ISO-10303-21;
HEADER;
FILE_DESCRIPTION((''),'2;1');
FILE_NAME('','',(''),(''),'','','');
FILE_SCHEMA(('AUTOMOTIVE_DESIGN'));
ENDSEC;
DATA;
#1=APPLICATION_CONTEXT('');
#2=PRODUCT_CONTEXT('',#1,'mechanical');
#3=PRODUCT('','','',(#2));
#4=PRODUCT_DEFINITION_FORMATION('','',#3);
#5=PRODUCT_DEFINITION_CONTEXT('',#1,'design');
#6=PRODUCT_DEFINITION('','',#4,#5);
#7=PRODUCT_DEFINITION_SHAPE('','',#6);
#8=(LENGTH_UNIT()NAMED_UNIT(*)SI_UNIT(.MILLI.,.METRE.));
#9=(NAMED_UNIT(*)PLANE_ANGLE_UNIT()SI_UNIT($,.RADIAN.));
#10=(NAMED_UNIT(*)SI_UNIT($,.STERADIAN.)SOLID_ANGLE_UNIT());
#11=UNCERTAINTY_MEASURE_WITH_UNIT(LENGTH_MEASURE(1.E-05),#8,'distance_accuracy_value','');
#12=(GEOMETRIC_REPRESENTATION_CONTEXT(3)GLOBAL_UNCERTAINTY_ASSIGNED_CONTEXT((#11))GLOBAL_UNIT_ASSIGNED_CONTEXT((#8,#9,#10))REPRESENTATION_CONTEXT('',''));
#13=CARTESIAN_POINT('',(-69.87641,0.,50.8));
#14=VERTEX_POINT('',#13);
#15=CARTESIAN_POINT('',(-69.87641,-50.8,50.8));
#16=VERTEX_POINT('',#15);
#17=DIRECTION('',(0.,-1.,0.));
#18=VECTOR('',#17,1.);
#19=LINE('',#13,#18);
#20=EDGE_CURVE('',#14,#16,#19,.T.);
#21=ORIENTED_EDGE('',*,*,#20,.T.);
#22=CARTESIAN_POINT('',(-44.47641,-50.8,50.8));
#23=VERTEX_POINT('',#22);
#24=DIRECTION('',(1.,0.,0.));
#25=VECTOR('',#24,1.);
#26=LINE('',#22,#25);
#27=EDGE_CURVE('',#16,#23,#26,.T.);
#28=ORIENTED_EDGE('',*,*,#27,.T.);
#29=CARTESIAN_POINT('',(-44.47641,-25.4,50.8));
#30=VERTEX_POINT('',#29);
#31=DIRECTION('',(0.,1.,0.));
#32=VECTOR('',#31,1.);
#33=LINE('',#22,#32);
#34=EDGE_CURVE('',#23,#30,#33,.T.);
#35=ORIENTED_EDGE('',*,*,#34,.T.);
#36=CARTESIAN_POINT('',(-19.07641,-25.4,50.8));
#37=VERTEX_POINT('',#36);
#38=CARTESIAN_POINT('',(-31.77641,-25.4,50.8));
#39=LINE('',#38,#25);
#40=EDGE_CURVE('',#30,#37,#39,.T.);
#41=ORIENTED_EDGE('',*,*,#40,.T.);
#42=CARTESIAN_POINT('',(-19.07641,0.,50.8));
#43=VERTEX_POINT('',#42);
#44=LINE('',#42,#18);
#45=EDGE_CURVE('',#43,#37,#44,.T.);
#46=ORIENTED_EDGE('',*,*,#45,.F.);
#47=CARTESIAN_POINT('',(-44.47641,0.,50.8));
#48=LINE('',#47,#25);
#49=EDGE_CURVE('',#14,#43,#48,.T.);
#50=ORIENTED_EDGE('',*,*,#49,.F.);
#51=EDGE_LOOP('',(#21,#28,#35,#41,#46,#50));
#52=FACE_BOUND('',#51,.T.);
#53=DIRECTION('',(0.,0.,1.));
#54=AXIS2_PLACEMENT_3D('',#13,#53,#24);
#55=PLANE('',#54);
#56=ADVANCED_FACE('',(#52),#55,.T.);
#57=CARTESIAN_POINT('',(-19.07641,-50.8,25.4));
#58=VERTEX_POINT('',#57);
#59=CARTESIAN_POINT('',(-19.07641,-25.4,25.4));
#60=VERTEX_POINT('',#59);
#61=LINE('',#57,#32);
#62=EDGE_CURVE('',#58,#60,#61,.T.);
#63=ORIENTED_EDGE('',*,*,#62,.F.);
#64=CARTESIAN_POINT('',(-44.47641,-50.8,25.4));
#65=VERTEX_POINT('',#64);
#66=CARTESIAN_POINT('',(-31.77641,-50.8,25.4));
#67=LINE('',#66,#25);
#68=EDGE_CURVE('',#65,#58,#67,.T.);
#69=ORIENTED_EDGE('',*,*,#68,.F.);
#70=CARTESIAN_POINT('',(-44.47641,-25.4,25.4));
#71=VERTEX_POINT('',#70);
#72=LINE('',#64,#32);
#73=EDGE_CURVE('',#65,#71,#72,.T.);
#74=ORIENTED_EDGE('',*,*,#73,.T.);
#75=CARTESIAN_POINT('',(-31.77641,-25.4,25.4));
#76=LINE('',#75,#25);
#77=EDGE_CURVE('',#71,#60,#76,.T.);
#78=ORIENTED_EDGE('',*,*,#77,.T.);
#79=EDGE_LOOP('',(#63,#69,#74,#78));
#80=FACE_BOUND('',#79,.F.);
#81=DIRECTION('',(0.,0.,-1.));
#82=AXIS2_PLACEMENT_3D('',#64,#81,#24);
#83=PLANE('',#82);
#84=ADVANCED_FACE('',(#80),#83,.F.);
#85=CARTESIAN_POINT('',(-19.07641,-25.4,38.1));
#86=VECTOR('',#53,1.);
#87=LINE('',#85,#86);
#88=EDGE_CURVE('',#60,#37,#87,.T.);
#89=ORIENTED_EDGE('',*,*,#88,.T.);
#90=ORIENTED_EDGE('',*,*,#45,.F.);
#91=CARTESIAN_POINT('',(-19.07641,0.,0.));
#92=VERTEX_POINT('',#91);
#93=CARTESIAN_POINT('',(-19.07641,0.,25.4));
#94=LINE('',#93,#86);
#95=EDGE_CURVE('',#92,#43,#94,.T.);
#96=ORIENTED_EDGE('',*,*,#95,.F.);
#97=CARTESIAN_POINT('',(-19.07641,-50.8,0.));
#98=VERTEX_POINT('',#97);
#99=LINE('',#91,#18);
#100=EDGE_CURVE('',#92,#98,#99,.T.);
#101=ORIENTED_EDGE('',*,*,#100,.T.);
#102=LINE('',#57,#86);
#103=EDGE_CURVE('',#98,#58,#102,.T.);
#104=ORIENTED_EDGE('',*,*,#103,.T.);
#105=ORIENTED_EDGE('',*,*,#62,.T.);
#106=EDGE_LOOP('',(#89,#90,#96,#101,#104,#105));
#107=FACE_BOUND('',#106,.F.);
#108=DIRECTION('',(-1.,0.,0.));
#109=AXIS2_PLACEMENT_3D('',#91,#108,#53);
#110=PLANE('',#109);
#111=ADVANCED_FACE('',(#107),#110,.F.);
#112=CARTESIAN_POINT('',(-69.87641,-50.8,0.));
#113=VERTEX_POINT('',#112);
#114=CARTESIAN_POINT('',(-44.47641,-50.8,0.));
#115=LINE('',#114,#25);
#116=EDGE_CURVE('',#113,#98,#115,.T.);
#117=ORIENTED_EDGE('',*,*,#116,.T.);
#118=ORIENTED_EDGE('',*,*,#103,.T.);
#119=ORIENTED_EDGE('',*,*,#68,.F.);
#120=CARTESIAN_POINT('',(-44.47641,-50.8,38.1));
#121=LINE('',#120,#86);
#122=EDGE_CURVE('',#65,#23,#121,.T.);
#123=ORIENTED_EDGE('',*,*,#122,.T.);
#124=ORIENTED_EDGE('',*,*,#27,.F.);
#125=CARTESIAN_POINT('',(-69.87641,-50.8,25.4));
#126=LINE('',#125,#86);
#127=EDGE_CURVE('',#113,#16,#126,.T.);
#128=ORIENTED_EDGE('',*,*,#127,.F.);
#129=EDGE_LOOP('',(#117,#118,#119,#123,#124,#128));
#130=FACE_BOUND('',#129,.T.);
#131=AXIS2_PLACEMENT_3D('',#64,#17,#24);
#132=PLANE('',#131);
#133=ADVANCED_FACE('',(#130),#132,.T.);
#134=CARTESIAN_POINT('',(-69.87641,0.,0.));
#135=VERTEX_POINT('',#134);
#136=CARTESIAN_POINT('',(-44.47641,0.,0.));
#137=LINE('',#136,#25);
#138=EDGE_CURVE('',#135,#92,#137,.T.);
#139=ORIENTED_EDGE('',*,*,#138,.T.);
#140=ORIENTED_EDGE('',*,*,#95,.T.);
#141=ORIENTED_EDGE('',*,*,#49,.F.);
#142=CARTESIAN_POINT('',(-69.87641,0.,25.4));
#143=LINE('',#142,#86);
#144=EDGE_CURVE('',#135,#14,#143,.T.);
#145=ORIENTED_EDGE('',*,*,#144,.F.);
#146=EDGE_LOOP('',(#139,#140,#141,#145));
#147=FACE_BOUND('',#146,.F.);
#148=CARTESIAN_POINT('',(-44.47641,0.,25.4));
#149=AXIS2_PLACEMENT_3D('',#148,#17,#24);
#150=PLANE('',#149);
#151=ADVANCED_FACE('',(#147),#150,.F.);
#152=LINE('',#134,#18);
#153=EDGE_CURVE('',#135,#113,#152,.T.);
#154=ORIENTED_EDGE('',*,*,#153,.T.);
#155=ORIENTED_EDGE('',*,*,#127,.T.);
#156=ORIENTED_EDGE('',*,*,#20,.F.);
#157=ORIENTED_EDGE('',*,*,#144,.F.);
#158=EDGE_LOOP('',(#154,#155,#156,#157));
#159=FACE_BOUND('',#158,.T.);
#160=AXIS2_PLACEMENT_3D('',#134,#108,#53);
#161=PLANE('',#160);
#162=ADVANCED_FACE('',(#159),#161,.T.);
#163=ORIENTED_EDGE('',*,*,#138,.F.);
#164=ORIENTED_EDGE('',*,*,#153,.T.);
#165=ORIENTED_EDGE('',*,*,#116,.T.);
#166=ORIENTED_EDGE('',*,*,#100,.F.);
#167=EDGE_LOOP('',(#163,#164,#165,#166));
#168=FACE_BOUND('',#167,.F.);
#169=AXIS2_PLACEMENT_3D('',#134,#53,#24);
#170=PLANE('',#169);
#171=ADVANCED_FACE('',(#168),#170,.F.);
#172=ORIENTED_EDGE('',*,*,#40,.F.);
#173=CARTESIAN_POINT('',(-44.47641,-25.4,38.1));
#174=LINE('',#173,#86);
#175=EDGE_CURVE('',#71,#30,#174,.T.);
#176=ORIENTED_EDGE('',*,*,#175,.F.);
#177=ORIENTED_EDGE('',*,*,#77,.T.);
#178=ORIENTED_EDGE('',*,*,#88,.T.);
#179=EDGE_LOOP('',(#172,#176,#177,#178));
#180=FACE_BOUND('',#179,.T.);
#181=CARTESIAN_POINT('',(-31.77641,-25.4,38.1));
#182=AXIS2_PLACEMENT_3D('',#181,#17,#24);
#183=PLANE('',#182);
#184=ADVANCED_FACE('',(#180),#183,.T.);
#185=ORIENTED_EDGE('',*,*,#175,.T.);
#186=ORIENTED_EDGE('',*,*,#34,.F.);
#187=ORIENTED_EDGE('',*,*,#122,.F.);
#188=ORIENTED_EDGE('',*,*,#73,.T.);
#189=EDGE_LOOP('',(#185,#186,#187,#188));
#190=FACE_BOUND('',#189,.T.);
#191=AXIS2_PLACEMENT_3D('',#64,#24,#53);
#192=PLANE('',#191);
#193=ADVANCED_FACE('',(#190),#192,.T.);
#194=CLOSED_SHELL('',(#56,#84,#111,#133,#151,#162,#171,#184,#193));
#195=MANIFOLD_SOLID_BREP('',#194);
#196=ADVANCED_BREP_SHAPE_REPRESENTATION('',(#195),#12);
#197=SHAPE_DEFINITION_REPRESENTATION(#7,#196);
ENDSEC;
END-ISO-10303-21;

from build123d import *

# Parameters (mm, degrees)
F0_W     = 50.8
F0_H     = 50.8
F1_DEPTH = 50.8
F2_W     = 25.4
F2_H     = 25.4
F3_DEPTH = 25.4


# Not quite as in the source:
# - a feature names something its author has since deleted; it is built from what else it names


with BuildPart() as f1:
    # F0 (on Front) → F1 (new body)
    with BuildSketch(Plane.XZ):
        with Locations((-44.4764100671, 25.4)):
            Rectangle(F0_W, F0_H)
    extrude(amount=F1_DEPTH)

    # F2 (on face) → F3 (cut)
    with BuildSketch(Plane.XZ.offset(50.8)):
        with Locations((-31.7764100671, 38.1)):
            Rectangle(F2_W, F2_H)
    extrude(amount=-F3_DEPTH, mode=Mode.SUBTRACT)


solid = f1.part
